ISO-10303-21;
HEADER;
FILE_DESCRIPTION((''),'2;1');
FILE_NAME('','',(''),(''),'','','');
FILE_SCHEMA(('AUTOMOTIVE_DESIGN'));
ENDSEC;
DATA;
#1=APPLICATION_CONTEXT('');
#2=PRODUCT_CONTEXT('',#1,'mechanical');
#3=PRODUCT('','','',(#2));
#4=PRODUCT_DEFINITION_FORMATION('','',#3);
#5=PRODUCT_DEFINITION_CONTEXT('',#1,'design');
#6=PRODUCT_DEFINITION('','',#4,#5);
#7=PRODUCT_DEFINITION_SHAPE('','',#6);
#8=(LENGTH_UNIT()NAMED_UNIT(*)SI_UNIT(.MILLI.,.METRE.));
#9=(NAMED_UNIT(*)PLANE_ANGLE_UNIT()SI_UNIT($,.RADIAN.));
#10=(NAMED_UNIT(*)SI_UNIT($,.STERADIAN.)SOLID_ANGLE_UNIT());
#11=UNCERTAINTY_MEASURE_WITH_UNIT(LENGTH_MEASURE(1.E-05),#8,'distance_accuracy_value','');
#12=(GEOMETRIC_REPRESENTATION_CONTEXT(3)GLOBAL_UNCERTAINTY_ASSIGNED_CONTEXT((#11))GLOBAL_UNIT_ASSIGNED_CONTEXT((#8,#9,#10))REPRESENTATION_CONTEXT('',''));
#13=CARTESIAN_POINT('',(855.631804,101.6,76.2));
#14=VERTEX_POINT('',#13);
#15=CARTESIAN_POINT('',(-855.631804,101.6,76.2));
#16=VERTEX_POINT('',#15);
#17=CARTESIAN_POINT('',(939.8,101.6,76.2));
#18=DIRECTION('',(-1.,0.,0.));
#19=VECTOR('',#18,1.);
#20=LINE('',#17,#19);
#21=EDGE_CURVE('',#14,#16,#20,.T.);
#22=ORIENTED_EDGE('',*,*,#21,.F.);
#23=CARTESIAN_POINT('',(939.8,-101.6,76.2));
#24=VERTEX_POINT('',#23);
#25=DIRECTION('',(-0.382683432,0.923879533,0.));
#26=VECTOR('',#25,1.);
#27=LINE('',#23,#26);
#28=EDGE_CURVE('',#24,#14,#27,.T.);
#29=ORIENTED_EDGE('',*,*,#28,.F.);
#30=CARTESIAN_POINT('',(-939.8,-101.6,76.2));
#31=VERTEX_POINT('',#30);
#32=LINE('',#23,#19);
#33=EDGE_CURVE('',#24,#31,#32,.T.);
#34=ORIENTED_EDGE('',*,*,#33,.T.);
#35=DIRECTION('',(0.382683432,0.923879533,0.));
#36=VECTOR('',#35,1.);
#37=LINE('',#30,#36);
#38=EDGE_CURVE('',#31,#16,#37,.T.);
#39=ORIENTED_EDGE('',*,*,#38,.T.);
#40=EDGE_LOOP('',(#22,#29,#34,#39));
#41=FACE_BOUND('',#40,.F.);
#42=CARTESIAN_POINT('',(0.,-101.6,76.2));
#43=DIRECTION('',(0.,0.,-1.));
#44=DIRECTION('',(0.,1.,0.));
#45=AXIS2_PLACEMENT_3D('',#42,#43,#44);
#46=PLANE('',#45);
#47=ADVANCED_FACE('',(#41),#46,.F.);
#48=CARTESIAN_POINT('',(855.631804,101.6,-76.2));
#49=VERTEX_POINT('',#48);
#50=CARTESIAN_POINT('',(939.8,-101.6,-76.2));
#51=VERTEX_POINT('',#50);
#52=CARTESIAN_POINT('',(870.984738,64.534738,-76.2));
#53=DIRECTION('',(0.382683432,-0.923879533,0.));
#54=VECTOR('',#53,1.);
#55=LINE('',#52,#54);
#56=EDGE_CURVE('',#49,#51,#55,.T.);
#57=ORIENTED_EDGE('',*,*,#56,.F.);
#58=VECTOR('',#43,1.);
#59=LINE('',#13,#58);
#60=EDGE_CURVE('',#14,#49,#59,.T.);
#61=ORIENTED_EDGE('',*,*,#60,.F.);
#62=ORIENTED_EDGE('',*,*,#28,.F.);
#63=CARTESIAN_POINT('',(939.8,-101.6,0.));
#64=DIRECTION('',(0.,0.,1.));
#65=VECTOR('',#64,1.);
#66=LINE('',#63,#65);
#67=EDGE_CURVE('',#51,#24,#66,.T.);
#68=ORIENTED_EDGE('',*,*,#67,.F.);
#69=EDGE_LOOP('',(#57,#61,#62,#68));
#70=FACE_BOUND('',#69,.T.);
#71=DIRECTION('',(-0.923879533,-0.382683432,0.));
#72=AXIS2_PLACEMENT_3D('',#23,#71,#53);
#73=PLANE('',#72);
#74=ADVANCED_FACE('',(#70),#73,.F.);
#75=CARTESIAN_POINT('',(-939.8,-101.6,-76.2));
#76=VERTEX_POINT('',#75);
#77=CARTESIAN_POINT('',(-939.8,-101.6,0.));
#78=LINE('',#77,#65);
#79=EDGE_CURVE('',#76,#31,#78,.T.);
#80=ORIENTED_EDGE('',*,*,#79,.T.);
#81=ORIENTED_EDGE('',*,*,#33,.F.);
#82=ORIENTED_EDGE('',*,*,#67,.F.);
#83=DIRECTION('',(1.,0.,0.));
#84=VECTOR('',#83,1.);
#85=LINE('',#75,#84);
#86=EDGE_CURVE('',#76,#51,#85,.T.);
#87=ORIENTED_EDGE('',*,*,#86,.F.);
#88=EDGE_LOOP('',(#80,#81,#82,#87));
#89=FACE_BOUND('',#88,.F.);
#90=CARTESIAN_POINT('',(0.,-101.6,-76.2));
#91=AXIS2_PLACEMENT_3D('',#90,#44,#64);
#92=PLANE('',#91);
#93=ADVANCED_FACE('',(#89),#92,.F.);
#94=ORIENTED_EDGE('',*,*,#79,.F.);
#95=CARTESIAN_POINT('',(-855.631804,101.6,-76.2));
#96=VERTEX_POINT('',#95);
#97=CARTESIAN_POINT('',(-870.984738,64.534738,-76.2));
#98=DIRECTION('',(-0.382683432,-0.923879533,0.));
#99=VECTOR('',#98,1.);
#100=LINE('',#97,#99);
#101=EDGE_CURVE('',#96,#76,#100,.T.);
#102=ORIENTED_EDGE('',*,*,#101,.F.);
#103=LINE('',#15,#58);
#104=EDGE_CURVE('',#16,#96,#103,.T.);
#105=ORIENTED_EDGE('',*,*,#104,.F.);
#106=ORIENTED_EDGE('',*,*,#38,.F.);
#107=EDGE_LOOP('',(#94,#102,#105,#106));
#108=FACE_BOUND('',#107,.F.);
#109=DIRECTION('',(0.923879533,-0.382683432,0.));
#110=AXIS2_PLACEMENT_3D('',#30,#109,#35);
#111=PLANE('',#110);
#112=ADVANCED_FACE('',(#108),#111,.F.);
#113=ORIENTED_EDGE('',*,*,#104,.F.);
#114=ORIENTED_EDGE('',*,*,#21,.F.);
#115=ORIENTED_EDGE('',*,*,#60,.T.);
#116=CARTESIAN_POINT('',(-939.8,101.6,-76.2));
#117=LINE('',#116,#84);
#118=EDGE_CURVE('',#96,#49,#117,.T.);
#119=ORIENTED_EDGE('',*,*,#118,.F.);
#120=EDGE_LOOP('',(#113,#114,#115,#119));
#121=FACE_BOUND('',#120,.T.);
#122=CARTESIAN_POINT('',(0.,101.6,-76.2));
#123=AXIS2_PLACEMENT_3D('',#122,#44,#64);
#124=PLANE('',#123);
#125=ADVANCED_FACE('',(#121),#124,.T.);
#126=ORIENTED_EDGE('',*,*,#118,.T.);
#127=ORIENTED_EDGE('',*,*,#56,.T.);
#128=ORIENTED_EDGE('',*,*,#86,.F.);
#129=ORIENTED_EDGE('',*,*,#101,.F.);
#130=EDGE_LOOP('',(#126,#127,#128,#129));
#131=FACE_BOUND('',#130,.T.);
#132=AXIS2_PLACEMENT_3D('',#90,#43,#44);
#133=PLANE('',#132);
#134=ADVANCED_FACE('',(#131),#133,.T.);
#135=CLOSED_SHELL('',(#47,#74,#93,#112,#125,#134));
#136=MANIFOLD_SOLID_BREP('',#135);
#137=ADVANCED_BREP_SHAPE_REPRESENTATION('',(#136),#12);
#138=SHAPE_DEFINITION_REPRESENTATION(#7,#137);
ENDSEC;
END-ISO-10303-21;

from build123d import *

# Parameters (mm, degrees)
F0_W     = 203.2
F0_H     = 152.4
F1_DEPTH = 939.8
F3_DEPTH = 152.401


# Not quite as in the source:
# - a pattern or mirror of a feature is missing from the dataset's text; its kind, count and spacing are read off the source's solid


with BuildPart() as f1:
    # F0 (on Right) → F1 (new body, symmetric)
    with BuildSketch(Plane.YZ):
        Rectangle(F0_W, F0_H)
    extrude(amount=F1_DEPTH, both=True)

    # F2 (on face) → F3 (cut, through all)
    with BuildSketch(Plane.XY.offset(76.2)):
        Polygon((-939.8, 101.6), (-939.8, -101.6), (-855.6318041258, 101.6), align=None)
    f3 = extrude(amount=-F3_DEPTH, mode=Mode.SUBTRACT)

    # F3_copies: F3 across plane
    add(f3.mirror(Plane(origin=(0, 0, 0), x_dir=(0, 0, 1), z_dir=(1, 0, 0))), mode=Mode.SUBTRACT)


solid = f1.part
